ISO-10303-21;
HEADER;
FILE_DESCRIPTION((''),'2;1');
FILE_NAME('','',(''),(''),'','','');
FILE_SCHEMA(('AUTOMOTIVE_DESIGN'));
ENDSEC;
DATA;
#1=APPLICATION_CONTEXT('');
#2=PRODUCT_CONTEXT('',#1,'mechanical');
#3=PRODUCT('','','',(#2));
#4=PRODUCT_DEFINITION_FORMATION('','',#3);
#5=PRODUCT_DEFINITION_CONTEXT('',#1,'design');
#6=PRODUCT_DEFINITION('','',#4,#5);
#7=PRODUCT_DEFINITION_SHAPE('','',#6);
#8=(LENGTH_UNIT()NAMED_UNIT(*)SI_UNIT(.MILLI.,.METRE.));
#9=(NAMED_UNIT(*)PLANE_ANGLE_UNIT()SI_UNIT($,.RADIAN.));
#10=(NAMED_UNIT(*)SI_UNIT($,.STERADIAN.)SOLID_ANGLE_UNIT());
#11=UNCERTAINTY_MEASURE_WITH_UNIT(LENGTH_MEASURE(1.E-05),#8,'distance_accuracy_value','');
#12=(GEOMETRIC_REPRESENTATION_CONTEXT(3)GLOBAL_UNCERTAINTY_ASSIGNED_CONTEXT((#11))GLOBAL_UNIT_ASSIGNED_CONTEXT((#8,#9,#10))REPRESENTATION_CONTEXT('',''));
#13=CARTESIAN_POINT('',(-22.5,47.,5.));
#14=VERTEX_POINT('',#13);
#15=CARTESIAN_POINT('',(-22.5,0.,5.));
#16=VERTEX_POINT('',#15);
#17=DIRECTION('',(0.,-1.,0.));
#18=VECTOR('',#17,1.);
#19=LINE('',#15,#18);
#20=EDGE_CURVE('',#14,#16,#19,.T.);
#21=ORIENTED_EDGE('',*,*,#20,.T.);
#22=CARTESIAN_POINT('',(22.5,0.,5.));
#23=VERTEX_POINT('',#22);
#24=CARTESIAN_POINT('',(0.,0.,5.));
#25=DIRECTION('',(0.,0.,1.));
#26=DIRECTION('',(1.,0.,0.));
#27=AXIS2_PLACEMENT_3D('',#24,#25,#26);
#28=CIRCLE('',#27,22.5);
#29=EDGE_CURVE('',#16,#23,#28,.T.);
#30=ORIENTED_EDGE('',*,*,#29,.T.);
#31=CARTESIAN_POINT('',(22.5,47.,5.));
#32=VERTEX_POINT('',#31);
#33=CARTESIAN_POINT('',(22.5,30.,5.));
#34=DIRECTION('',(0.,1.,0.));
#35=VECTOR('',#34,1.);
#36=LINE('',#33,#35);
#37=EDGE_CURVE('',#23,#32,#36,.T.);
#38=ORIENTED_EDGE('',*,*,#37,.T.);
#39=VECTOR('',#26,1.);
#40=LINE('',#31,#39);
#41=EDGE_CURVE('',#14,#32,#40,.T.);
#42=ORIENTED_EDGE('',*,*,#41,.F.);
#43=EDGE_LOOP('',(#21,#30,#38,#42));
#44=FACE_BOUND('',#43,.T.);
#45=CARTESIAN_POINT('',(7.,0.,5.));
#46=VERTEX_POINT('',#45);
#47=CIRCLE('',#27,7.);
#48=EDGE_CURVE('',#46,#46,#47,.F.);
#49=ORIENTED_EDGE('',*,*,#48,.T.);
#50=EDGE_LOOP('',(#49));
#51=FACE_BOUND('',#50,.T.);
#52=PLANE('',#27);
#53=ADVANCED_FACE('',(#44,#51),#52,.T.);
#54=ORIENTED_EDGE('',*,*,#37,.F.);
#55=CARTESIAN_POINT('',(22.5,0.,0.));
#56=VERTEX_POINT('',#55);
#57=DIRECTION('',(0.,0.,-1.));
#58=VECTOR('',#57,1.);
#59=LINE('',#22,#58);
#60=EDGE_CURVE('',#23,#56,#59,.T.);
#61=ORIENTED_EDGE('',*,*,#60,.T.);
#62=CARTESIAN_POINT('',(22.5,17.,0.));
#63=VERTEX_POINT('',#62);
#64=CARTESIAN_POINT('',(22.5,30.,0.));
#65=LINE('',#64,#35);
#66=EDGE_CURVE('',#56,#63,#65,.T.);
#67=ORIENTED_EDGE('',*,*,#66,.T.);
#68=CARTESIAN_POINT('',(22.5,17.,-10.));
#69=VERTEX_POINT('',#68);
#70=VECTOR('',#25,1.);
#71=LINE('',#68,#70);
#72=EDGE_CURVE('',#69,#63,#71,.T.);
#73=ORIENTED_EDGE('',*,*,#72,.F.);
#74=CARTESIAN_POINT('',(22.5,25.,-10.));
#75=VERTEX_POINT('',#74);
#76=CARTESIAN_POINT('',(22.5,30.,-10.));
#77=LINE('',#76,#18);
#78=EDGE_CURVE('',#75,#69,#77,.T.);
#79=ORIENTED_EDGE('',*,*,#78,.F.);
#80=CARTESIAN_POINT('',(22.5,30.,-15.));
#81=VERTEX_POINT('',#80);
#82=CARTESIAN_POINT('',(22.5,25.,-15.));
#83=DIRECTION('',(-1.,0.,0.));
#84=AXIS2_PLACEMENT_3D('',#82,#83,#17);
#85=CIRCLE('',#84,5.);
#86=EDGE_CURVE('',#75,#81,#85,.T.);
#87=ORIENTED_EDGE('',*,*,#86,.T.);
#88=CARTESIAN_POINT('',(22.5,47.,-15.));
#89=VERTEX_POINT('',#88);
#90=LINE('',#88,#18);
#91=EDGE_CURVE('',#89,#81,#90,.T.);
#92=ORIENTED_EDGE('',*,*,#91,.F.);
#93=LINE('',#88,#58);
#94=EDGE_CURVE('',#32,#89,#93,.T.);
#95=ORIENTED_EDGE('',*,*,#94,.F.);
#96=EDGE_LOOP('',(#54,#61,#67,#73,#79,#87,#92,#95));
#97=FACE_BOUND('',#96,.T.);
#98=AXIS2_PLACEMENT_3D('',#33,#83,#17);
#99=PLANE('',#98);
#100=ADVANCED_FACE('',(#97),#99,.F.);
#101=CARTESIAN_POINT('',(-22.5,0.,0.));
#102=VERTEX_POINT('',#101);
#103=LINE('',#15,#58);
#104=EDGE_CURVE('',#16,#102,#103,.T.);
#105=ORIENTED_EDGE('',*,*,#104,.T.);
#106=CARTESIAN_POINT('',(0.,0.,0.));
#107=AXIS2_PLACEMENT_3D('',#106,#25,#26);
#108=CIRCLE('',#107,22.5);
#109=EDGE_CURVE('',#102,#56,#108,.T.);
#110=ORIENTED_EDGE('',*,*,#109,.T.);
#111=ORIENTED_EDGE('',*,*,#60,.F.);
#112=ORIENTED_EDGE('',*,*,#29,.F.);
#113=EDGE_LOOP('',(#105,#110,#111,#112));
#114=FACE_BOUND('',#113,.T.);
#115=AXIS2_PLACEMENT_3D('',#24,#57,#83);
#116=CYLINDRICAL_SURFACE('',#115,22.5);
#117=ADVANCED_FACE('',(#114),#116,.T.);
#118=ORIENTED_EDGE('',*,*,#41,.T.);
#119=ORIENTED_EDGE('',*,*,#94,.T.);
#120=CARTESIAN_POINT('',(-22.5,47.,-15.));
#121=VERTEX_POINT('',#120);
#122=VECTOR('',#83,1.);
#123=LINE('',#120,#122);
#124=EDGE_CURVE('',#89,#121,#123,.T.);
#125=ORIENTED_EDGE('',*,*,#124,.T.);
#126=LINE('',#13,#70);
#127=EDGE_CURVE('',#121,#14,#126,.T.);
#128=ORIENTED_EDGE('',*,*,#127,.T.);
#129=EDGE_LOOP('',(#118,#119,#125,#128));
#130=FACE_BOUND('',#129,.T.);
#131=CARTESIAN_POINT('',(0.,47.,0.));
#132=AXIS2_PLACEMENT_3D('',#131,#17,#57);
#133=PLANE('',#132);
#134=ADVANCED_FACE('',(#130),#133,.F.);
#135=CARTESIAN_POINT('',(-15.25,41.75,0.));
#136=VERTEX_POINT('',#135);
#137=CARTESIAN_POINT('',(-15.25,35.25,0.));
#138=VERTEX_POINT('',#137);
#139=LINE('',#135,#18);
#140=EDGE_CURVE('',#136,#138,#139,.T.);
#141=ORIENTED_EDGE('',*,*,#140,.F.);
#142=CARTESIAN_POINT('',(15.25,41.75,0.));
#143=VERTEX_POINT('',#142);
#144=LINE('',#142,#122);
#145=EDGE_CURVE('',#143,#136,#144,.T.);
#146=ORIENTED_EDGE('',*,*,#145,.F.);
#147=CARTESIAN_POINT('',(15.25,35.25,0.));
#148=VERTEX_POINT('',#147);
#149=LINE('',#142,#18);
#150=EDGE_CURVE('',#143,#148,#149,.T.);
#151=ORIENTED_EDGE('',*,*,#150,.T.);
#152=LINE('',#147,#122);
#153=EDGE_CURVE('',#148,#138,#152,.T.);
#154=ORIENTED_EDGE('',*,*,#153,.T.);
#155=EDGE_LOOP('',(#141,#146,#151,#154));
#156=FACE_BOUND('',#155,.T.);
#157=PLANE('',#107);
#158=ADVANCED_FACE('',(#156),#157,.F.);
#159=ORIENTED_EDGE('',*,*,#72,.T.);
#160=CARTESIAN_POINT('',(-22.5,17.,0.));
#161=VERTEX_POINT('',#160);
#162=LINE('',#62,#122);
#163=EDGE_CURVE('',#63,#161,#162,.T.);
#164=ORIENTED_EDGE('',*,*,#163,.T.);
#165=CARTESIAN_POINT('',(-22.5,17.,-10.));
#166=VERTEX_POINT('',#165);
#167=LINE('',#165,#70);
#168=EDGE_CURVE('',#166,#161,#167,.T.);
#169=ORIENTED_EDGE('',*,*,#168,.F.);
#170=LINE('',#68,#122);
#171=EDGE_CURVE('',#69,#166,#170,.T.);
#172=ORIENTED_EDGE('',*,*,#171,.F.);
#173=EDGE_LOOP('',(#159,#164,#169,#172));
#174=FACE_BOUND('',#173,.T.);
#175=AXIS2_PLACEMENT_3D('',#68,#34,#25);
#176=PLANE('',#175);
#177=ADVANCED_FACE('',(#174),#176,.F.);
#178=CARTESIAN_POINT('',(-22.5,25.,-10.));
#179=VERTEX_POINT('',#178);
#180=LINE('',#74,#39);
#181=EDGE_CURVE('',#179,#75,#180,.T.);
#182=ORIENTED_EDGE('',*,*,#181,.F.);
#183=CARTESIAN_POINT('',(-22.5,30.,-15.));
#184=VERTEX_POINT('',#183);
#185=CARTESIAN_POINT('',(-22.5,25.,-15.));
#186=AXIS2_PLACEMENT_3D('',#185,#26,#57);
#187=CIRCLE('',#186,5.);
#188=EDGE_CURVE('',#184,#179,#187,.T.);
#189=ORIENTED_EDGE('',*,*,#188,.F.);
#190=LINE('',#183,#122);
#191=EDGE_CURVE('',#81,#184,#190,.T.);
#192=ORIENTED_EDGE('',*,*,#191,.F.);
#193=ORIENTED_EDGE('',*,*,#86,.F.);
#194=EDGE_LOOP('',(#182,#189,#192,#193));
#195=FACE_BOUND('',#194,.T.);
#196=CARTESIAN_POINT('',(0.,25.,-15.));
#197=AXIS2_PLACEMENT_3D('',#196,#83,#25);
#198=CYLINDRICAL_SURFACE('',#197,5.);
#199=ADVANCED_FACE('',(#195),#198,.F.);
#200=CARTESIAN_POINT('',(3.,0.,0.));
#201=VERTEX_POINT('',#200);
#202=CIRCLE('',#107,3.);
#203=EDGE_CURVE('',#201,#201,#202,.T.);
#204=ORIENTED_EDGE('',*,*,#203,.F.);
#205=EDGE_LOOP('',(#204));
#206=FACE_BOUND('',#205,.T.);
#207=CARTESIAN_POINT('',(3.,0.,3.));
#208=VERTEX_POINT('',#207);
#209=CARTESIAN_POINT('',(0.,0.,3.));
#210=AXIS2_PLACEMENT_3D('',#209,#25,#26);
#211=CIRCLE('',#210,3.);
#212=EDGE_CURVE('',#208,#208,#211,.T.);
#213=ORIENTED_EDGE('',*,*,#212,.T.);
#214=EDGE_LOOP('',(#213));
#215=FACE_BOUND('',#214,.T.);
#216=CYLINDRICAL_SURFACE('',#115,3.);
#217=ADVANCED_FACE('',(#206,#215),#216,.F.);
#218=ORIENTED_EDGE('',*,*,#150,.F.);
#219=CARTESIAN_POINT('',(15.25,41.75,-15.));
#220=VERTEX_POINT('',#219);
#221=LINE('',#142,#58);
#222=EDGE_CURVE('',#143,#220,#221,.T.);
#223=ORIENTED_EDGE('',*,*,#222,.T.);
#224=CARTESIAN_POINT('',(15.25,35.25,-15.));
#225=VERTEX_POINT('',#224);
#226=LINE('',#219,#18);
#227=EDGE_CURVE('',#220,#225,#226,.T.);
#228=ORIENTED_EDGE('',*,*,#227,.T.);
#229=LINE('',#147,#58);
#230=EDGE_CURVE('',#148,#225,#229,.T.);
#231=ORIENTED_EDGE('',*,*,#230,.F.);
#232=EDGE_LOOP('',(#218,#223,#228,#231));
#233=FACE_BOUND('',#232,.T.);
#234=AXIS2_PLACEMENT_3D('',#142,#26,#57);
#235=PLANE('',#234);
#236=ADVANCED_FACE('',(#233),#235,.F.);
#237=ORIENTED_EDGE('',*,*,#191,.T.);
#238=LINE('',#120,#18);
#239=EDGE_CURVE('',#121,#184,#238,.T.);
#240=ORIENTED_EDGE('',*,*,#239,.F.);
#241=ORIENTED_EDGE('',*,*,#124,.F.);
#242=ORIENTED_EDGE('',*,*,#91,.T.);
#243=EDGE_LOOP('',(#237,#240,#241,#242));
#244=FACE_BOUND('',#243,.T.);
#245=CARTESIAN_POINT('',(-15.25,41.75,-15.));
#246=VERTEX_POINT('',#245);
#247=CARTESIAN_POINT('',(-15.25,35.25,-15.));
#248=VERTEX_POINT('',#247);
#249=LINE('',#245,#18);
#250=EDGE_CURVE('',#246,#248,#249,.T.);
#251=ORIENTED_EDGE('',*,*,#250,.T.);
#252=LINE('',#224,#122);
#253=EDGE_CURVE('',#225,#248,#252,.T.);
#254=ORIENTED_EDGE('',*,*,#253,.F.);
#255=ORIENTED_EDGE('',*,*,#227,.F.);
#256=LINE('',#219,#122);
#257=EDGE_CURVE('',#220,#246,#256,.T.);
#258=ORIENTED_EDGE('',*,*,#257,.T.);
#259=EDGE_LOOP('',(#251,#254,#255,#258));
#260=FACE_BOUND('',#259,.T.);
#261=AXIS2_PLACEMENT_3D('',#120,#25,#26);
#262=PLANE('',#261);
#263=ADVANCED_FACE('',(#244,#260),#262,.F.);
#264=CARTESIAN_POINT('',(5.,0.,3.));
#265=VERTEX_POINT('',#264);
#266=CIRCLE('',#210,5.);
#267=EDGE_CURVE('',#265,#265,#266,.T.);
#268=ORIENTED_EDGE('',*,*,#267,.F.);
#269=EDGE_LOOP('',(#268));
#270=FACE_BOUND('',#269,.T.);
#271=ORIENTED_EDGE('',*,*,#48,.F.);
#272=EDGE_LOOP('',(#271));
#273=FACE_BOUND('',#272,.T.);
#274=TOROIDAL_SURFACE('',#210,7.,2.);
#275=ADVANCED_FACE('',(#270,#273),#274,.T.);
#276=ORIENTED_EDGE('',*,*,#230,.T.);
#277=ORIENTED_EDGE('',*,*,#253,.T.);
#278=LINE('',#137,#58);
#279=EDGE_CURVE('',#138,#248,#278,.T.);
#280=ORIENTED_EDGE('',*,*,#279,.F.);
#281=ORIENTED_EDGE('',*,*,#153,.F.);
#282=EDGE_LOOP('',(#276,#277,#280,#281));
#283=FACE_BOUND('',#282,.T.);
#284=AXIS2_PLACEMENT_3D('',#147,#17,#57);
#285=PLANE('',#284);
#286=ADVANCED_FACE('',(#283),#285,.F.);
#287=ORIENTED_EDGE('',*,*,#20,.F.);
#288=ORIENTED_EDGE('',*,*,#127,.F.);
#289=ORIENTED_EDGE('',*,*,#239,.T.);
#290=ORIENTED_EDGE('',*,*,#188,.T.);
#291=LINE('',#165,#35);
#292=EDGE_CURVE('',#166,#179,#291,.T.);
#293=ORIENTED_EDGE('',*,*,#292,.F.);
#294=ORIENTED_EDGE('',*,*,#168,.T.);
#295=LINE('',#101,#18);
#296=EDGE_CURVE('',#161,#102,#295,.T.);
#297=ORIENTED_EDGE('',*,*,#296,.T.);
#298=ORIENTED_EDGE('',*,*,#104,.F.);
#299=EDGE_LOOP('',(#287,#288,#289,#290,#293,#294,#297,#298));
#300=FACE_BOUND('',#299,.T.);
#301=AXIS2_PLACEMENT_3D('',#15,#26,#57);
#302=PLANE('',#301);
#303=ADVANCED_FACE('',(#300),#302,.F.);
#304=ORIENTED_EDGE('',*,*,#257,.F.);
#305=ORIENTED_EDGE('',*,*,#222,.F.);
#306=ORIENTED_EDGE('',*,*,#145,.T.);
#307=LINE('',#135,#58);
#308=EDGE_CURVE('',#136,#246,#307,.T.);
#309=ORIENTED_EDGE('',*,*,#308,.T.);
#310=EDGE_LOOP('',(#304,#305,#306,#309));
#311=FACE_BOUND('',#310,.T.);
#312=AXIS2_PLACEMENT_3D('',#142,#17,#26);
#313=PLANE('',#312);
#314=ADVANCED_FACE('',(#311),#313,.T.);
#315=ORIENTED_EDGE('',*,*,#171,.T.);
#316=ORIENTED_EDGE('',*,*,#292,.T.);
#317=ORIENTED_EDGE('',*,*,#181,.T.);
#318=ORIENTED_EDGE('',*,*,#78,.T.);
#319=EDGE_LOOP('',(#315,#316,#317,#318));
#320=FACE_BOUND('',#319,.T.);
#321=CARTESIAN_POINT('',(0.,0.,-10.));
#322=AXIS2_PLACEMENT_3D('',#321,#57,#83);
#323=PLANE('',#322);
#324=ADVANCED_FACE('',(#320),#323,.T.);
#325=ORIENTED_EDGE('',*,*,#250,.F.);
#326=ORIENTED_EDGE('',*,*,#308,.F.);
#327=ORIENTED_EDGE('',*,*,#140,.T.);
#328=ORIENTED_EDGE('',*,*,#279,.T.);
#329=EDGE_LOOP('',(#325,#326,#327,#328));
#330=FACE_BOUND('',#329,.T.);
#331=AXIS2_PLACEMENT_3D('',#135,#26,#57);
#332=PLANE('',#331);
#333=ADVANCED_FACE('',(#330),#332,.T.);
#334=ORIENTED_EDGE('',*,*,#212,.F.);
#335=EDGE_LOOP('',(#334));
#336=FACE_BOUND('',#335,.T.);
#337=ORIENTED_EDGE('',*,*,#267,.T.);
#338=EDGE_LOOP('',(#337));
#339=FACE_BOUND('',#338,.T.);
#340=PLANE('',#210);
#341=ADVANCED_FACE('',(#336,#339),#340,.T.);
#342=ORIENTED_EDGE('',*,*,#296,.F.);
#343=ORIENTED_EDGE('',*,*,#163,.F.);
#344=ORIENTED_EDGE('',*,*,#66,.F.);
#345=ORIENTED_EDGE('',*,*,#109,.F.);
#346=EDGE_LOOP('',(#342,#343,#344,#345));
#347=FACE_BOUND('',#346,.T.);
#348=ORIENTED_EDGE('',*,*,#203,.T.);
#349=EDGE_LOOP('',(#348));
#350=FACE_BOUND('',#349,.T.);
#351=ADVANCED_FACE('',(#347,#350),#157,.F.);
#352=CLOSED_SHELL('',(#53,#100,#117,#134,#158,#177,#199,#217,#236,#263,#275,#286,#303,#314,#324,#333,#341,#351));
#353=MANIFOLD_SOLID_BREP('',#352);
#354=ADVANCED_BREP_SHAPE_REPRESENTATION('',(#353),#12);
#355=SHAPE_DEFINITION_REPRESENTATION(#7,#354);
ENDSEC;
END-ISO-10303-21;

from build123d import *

# Parameters (mm, degrees)
ESBO_O2_R                = 3
RESSALTO_EXTRUS_O1_DEPTH = 5
ESBO_O7_R                = 5
CORTE_EXTRUS_O2_DEPTH    = 2
ESBO_O3_W                = 45
ESBO_O3_H                = 13
RESSALTO_EXTRUS_O2_DEPTH = 10
ESBO_O4_W                = 45
ESBO_O4_H                = 20
RESSALTO_EXTRUS_O3_DEPTH = 17
ESBO_O6_W                = 30.5
ESBO_O6_H                = 6.5
CORTE_EXTRUS_O1_DEPTH    = 15
FILETE4_R                = 5
FILETE5_R                = 2


with BuildPart() as part:
    # Esboço2 → Ressalto-extrusão1 (new body)
    with BuildSketch(Plane.XY):
        with BuildLine():
            Line((-22.5, 0), (-22.5, 30))
            Line((-22.5, 30), (22.5, 30))
            Line((22.5, 30), (22.5, 0))
            ThreePointArc((22.5, 0), (0, -22.5), (-22.5, 0))
        make_face()
        Circle(ESBO_O2_R, mode=Mode.SUBTRACT)
    extrude(amount=RESSALTO_EXTRUS_O1_DEPTH)

    # Esboço7 → Corte-extrusão2 (cut)
    with BuildSketch(Plane.XY.offset(5)):
        Circle(ESBO_O7_R)
    extrude(amount=-CORTE_EXTRUS_O2_DEPTH, mode=Mode.SUBTRACT)

    # Esboço3 → Ressalto-extrusão2 (add)
    with BuildSketch(Plane(origin=(0, 0, 0), x_dir=(-1, 0, 0), z_dir=(0, 0, -1))):
        with Locations((0, 23.5)):
            Rectangle(ESBO_O3_W, ESBO_O3_H)
    extrude(amount=RESSALTO_EXTRUS_O2_DEPTH)

    # Esboço4 → Ressalto-extrusão3 (add)
    with BuildSketch(Plane(origin=(0, 30, 0), x_dir=(1, 0, 0), z_dir=(0, 1, 0))):
        with Locations((0, 5)):
            Rectangle(ESBO_O4_W, ESBO_O4_H)
    extrude(amount=RESSALTO_EXTRUS_O3_DEPTH)

    # Esboço6 → Corte-extrusão1 (cut)
    with BuildSketch(Plane(origin=(0, 0, -15), x_dir=(-1, 0, 0), z_dir=(0, 0, -1))):
        with Locations((0, 38.5)):
            Rectangle(ESBO_O6_W, ESBO_O6_H)
    extrude(amount=-CORTE_EXTRUS_O1_DEPTH, mode=Mode.SUBTRACT)

    # Filete4
    filete4_edges = [part.edges().sort_by_distance(p)[0] for p in [
        (0, 30, -10),
    ]]
    fillet(filete4_edges, radius=FILETE4_R - 0.0001)  # a hair under: the kernel refuses the full size

    # Filete5
    filete5_edges = [part.edges().sort_by_distance(p)[0] for p in [
        (-5, 0, 5),
    ]]
    fillet(filete5_edges, radius=FILETE5_R - 0.0001)  # a hair under: the kernel refuses the full size


solid = part.part
